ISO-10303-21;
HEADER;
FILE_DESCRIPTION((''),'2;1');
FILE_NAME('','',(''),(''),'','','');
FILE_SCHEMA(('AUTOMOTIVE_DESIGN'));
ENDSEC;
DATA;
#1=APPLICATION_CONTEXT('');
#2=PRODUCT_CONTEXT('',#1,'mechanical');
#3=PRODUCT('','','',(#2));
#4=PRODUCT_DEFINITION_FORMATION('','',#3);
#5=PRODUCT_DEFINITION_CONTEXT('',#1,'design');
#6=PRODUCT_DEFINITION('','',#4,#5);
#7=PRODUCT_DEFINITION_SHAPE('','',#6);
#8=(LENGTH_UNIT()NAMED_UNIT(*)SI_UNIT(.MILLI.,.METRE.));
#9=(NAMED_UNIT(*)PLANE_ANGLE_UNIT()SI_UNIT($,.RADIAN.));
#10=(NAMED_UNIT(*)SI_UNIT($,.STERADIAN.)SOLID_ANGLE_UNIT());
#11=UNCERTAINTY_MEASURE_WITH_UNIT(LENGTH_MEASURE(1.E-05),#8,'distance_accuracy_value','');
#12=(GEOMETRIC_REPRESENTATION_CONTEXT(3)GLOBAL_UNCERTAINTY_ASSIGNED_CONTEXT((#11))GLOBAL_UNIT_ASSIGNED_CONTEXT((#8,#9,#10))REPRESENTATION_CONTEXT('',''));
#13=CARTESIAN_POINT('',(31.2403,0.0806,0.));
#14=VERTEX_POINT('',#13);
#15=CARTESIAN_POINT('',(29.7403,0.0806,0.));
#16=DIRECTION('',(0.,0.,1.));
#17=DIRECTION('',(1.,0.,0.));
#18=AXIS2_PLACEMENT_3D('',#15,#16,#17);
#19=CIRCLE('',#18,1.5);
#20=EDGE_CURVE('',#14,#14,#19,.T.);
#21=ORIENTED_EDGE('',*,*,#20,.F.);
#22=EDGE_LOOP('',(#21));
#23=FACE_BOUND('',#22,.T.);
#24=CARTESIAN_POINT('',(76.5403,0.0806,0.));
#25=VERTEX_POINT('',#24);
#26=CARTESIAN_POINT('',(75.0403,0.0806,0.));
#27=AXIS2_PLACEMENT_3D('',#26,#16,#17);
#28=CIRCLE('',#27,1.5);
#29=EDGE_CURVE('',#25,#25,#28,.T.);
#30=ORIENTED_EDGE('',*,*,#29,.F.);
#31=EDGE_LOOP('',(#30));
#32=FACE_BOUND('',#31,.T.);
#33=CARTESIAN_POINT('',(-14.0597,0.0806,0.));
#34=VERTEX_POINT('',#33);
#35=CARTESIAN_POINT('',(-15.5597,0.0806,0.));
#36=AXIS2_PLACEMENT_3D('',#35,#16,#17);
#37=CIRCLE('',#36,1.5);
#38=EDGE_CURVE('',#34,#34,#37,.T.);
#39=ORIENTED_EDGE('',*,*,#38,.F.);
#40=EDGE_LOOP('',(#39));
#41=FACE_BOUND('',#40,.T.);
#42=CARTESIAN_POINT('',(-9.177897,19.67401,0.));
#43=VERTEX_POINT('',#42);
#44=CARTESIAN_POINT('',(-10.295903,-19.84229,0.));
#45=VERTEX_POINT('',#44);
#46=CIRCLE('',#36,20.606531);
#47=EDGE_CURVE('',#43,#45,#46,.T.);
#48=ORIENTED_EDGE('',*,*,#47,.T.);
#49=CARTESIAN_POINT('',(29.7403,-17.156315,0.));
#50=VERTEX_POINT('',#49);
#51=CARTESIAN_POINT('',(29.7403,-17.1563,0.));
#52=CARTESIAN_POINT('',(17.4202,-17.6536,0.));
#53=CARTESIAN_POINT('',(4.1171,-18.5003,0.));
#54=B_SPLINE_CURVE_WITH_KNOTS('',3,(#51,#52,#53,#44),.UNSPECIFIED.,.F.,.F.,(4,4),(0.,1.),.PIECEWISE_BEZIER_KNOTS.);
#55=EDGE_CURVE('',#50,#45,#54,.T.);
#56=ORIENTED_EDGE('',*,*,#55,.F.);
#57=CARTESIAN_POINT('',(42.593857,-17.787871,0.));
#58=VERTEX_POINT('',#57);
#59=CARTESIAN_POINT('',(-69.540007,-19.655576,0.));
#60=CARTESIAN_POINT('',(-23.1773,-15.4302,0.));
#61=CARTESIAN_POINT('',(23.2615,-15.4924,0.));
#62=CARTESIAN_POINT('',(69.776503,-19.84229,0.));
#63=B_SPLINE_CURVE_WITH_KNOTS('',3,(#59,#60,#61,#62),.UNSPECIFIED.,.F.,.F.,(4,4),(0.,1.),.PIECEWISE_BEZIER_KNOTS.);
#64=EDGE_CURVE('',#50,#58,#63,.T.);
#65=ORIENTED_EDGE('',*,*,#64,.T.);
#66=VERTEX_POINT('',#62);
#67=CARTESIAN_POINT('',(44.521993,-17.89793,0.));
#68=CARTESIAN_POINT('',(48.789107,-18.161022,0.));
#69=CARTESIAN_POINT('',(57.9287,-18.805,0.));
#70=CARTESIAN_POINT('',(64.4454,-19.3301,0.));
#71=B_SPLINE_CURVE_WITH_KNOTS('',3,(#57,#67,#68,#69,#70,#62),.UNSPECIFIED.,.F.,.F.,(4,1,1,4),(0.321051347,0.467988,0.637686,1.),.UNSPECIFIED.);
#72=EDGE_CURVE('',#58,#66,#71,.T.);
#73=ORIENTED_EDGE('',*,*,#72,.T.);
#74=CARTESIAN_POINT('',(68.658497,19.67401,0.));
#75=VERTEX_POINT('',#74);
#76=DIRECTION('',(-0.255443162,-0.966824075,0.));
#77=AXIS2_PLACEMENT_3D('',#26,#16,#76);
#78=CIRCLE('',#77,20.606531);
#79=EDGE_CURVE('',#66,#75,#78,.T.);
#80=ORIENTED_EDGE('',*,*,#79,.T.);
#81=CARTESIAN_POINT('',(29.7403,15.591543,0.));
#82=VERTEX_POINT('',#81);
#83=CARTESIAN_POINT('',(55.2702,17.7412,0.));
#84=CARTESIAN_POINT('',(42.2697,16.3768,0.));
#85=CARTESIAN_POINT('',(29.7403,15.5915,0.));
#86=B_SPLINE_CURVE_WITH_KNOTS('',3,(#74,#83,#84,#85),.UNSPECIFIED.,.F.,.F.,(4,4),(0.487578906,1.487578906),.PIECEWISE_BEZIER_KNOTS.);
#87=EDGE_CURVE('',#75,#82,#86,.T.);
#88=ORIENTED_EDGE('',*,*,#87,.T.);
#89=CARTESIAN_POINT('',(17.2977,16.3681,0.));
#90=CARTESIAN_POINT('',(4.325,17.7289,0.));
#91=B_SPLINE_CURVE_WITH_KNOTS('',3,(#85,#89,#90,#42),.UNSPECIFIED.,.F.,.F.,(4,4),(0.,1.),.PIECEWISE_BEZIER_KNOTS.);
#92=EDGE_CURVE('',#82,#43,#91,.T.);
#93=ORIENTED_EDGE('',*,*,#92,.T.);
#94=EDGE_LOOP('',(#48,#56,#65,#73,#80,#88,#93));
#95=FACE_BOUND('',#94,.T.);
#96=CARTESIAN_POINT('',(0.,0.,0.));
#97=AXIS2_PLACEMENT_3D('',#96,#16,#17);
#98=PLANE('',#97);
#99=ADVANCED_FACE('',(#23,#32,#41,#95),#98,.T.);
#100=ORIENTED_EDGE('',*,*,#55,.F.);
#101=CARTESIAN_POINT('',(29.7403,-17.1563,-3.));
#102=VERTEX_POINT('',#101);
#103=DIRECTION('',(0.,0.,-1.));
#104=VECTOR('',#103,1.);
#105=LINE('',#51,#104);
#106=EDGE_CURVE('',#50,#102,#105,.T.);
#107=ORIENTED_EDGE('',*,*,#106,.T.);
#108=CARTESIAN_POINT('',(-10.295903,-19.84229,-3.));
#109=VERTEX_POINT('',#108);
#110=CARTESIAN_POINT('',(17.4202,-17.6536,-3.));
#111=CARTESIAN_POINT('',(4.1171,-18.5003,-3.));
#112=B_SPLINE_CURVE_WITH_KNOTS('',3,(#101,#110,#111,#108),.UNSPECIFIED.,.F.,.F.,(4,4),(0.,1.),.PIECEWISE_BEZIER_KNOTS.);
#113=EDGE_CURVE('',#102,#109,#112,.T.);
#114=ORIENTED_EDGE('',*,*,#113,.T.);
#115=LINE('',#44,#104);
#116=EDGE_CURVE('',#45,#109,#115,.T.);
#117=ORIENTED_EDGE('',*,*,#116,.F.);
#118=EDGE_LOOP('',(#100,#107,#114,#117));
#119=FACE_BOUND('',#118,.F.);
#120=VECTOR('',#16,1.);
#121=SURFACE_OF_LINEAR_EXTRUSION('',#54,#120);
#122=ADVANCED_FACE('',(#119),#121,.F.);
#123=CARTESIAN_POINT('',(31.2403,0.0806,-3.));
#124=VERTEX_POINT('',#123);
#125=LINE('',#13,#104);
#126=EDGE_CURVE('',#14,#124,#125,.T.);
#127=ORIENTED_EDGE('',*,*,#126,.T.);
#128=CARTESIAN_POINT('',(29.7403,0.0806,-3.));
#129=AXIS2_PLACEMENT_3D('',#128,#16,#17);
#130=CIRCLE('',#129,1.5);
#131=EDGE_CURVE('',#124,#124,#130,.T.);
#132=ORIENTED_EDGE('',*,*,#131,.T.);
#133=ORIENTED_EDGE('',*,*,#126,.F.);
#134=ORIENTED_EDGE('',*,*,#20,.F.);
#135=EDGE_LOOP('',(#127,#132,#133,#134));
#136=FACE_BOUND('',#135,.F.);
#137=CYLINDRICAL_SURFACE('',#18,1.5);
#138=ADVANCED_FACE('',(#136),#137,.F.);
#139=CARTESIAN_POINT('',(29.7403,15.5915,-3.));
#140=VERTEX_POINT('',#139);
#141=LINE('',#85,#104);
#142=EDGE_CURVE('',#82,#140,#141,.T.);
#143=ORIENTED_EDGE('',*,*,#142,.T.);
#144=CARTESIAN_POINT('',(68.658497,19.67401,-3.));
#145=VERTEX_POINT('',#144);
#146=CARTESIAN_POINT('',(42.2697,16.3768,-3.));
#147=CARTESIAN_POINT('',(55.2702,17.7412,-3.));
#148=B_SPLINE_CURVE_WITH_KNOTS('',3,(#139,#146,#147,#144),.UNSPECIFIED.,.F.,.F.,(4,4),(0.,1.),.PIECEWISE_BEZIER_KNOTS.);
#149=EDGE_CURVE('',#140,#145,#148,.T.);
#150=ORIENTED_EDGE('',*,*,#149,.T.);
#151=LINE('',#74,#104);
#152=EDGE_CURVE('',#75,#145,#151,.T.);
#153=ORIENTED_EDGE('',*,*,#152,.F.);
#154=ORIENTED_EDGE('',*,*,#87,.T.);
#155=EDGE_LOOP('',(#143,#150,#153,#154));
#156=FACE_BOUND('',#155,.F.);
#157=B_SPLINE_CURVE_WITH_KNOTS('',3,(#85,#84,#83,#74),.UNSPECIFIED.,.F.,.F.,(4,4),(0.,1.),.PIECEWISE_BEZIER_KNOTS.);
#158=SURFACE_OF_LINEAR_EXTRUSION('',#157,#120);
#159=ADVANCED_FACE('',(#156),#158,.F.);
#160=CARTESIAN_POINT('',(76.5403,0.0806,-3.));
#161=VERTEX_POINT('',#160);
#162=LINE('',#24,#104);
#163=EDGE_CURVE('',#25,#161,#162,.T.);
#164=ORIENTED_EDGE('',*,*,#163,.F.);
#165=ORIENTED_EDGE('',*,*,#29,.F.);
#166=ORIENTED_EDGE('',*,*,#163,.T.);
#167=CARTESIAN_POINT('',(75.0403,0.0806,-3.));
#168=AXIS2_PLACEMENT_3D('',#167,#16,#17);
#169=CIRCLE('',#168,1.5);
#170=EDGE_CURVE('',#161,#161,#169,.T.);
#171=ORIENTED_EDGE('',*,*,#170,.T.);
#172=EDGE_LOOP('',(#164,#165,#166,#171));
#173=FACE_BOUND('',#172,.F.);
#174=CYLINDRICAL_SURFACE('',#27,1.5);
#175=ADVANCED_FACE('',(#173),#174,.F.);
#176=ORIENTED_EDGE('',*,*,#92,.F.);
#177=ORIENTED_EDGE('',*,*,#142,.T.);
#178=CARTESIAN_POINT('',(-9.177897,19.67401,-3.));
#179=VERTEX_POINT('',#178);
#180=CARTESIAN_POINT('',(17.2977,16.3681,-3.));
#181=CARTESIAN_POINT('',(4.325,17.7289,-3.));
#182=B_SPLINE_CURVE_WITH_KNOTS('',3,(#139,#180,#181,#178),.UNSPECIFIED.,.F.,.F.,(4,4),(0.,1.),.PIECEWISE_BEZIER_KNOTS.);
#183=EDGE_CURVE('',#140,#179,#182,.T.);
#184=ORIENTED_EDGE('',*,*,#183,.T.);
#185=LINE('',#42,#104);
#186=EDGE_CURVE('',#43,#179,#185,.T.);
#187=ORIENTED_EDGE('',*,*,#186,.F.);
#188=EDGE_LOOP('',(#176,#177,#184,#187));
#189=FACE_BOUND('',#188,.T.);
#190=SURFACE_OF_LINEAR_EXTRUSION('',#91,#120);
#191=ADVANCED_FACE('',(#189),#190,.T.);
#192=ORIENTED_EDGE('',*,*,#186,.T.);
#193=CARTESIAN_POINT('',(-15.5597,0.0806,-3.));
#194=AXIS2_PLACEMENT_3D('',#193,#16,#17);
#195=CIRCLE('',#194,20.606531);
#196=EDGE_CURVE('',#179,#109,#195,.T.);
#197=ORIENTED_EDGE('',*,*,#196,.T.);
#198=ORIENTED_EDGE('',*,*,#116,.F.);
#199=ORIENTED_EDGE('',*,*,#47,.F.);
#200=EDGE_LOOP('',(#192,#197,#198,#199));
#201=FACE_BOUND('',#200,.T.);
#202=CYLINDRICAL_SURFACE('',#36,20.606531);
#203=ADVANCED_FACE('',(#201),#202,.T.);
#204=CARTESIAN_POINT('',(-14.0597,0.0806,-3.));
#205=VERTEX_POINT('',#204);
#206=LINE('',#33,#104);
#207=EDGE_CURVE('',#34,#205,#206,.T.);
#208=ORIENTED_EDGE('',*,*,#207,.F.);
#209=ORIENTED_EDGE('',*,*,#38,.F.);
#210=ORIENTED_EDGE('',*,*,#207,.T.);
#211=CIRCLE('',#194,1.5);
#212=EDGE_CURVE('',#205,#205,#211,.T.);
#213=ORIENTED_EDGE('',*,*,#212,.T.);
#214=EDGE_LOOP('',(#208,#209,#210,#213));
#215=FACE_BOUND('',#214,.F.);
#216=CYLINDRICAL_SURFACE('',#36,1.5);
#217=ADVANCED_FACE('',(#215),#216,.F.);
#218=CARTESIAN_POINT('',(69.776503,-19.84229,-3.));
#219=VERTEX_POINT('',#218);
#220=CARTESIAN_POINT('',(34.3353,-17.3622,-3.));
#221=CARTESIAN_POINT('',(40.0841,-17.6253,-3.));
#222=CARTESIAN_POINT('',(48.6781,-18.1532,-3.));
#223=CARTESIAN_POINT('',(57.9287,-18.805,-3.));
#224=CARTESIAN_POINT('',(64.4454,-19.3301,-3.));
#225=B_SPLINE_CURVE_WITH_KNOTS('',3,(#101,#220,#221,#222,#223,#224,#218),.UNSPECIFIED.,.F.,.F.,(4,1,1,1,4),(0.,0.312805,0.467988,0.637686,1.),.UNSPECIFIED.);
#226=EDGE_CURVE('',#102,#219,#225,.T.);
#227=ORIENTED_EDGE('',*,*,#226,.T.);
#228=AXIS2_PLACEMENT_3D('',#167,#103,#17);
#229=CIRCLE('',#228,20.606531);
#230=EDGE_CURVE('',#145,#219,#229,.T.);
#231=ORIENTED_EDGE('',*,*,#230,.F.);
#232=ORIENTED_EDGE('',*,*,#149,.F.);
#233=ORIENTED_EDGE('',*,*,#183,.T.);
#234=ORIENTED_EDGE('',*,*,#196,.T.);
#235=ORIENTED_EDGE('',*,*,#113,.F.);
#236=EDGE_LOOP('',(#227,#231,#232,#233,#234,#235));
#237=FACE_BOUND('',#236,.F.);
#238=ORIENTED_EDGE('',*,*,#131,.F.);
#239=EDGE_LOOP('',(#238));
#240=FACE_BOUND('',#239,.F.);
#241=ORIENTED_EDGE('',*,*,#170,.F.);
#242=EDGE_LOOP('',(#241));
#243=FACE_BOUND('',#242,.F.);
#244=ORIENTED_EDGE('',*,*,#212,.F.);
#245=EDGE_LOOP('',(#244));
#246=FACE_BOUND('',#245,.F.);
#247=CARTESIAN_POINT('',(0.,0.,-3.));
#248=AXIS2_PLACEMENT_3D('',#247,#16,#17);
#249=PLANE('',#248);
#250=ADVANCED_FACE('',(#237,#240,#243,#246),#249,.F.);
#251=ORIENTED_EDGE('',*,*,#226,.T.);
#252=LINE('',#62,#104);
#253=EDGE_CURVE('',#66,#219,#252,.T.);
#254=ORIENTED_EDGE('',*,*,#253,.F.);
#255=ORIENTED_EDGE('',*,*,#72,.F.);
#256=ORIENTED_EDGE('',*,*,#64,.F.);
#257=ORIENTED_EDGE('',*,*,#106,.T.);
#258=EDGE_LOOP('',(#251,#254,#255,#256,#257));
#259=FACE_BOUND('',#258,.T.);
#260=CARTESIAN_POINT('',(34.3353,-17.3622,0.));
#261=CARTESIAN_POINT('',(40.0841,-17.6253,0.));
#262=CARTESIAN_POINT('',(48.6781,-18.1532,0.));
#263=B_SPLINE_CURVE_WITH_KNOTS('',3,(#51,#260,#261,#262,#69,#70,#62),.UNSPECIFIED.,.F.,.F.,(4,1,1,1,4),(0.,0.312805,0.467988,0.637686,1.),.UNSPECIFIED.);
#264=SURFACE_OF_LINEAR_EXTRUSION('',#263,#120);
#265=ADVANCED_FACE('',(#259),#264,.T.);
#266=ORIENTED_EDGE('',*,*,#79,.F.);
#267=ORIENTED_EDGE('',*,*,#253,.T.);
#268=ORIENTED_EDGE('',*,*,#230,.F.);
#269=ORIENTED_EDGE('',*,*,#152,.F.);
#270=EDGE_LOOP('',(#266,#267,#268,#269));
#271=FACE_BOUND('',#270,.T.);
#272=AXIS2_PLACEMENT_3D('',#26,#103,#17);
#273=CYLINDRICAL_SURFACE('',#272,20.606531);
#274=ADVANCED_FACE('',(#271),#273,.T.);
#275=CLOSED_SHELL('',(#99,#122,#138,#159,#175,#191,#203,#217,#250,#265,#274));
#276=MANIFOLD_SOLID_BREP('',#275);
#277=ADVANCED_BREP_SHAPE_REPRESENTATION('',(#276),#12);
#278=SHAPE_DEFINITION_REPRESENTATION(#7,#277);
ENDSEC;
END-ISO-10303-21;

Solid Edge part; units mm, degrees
sketch "Sketch1" plane through (0, 0, 0) normal (0, 0, 1) x (1, 0, 0)
  spline S0 degree 3 poles (-69.5242, 19.4932) (-23.3267, 12.9257) (22.6888, 12.9752) (68.6585, 19.674) knots 0 0 0 0 1 1 1 1
  spline S1 degree 3 poles (-69.54, -19.6556) (-23.1773, -15.4302) (23.2615, -15.4924) (69.7765, -19.8423) knots 0 0 0 0 1 1 1 1
  arc A0 (-69.54, -19.6556) -> (-69.5242, 19.4932) centre (-75.1666, -0.0789) cw
  arc A1 (68.6585, 19.674) -> (69.7765, -19.8423) centre (75.0403, 0.0806) cw
extrude "Protrusion1" add sketch "Sketch1" along normal blind 3
sketch "Sketch2" plane through (0.0555, 0.0806, 3) normal (0, 0, 1) x (1, 0, 0)
  circle A0 centre (83.5848, 0) radius 1
  circle A1 centre (55.6848, 0) radius 1
  line L0 (-58.5721, -6.5095) -> (-58.5721, 6.1905)
  line L1 (-58.5721, 6.1905) -> (-81.1721, 6.1905)
  line L2 (-81.1721, 6.1905) -> (-81.1721, -6.5095)
  line L3 (-81.1721, -6.5095) -> (-58.5721, -6.5095)
  circle A2 centre (-83.8221, -0.1595) radius 1
  circle A3 centre (-55.9221, -0.1595) radius 1
  line L4 (58.3348, 6.35) -> (58.3348, -6.35)
  line L5 (58.3348, -6.35) -> (80.9348, -6.35)
  line L6 (80.9348, -6.35) -> (80.9348, 6.35)
  line L7 (80.9348, 6.35) -> (58.3348, 6.35)
  dimension "D1" = 22.6
  dimension "D2" = 22.6
  dimension "D3" = 12.7
extrude "ExtrudedCutout_1" cut sketch "Sketch2" against normal blind 484.752
sketch "Sketch3" plane through (0.0555, 0.0806, 3) normal (0, 0, 1) x (1, 0, 0)
  line L0 (29.6848, 27.4896) -> (-99.1539, 27.4896)
  line L1 (-99.1539, 27.4896) -> (-99.1539, -25.8213)
  line L2 (-99.1539, -25.8213) -> (29.6848, -25.8213)
  line L3 (29.6848, -25.8213) -> (29.6848, 27.4896)
extrude "ExtrudedCutout_2" cut sketch "Sketch3" against normal blind 169.5138
sketch "Sketch4" plane through (0, 0, 0) normal (0, 0, 1) x (1, 0, 0)
  line L0 (29.7403, -17.1563) -> (29.7403, 15.5915)
  spline S0 degree 3 poles (29.7403, 15.5915) (42.2697, 16.3768) (55.2702, 17.7412) (68.6585, 19.674) knots 0 0 0 0 1 1 1 1
  spline S1 degree 3 poles (29.7403, -17.1563) (34.3353, -17.3622) (40.0841, -17.6253) (48.6781, -18.1532) (57.9287, -18.805) (64.4454, -19.3301) (69.7765, -19.8423) knots 0 0 0 0 0.312805 0.467988 0.637686 1 1 1 1
  arc A0 (68.6585, 19.674) -> (69.7765, -19.8423) centre (75.0403, 0.0806) cw
  line L1 (58.3903, -6.2694) -> (58.3903, 6.4306)
  line L2 (58.3903, 6.4306) -> (80.9903, 6.4306)
  line L3 (80.9903, 6.4306) -> (80.9903, -6.2694)
  line L4 (80.9903, -6.2694) -> (58.3903, -6.2694)
  circle A1 centre (55.7403, 0.0806) radius 1
  circle A2 centre (83.6403, 0.0806) radius 1
  line L5 (29.7403, -17.1563) -> (29.7403, 15.5915)
  spline S2 degree 3 poles (29.7403, 15.5915) (17.2109, 16.3768) (4.2104, 17.7412) (-9.1779, 19.674) knots 0 0 0 0 1 1 1 1
  arc A3 (-9.1779, 19.674) -> (-10.2959, -19.8423) centre (-15.5597, 0.0806) ccw
  spline S3 degree 3 poles (29.7403, -17.1563) (25.1453, -17.3622) (19.3965, -17.6253) (10.8024, -18.1532) (1.5519, -18.805) (-4.9648, -19.3301) (-10.2959, -19.8423) knots 0 0 0 0 0.312805 0.467988 0.637686 1 1 1 1
  line L6 (1.0903, -6.2694) -> (1.0903, 6.4306)
  line L7 (1.0903, 6.4306) -> (-21.5097, 6.4306)
  line L8 (-21.5097, 6.4306) -> (-21.5097, -6.2694)
  line L9 (-21.5097, -6.2694) -> (1.0903, -6.2694)
  circle A4 centre (3.7403, 0.0806) radius 1
  circle A5 centre (-24.1597, 0.0806) radius 1
extrude "ExtrudedProtrusion_2" add sketch "Sketch4" against normal blind 3
sketch "Sketch5" plane through (-3.213, 0.0806, 0) normal (0, 0, 1) x (0, 1, 0)
  line L0 (25.6992, -32.9533) -> (-24.0131, -32.9533)
  line L1 (-24.0131, -32.9533) -> (-24.0131, 35.3247)
  line L2 (-24.0131, 35.3247) -> (25.6992, 35.3247)
  line L3 (25.6992, 35.3247) -> (25.6992, -32.9533)
extrude "ExtrudedCutout_3" cut sketch "Sketch5" against normal blind 310.7547
sketch "Sketch6" plane through (69.6903, 6.4306, 0) normal (0, -1, 0) x (1, 0, 0)
  line L0 (-39.95, 3) -> (25.9565, 3)
  line L1 (25.9565, 3) -> (25.9565, 0)
  line L2 (25.9565, 0) -> (-39.95, 0)
  line L3 (-39.95, 0) -> (-39.95, 3)
extrude "ExtrudedCutout_4" cut sketch "Sketch6" against normal blind 369.6121
sketch "Sketch7" plane through (69.6903, -6.2694, 0) normal (0, 1, 0) x (1, 0, 0)
  line L0 (-39.95, -0.4111) -> (-39.95, -3)
  line L1 (-39.95, -3) -> (25.7218, -3)
  line L2 (25.7218, -3) -> (25.9565, 0)
  line L3 (25.9565, 0) -> (-39.95, -0.4111)
extrude "ExtrudedCutout_5" cut sketch "Sketch7" against normal blind 176.465
sketch "Sketch8" plane through (29.7403, -0.7635, 0) normal (-1, 0, 0) x (0, -1, 0)
  line L0 (20.933, 0) -> (-7.194, 0)
  line L1 (-7.194, 0) -> (-7.194, 4.1468)
  line L2 (-7.194, 4.1468) -> (20.933, 4.1468)
  line L3 (20.933, 4.1468) -> (20.933, 0)
extrude "ExtrudedCutout_6" cut sketch "Sketch8" against normal blind 228.3963
sketch "Sketch9" plane through (0, 0, 0) normal (0, 0, 1) x (1, 0, 0)
  line L0 (-21.5097, -6.2694) -> (-21.5097, 6.4306)
  line L1 (-21.5097, 6.4306) -> (1.0903, 6.4306)
  line L2 (1.0903, -6.2694) -> (1.0903, 6.4306)
  line L3 (1.0903, -6.2694) -> (-21.5097, -6.2694)
  circle A0 centre (3.7403, 0.0806) radius 1
  circle A1 centre (-24.1597, 0.0806) radius 1
  spline S0 degree 3 poles (29.7403, 15.5915) (17.2977, 16.3681) (4.325, 17.7289) (-9.1779, 19.674) knots 0 0 0 0 1 1 1 1
  arc A2 (-9.1779, 19.674) -> (-10.2959, -19.8423) centre (-15.5597, 0.0806) ccw
  spline S1 degree 3 poles (29.7403, -17.1563) (17.4202, -17.6536) (4.1171, -18.5003) (-10.2959, -19.8423) knots 0 0 0 0 1 1 1 1
  line L4 (29.7403, -17.1563) -> (29.7403, 15.5915)
extrude "ExtrudedProtrusion_3" add sketch "Sketch9" against normal blind 3
sketch "Sketch10" plane through (29.7403, 0.0806, 0) normal (0, 0, 1) x (1, 0, 0)
  line L0 (-24.0106, -8.9531) -> (-56.723, -8.9531)
  line L1 (-56.723, -8.9531) -> (-56.723, 8.934)
  line L2 (-56.723, 8.934) -> (-24.0106, 8.934)
  line L3 (-24.0106, 8.934) -> (-24.0106, -8.9531)
  line L4 (23.0437, -9.1142) -> (23.0437, 9.5786)
  line L5 (23.0437, 9.5786) -> (56.723, 9.5786)
  line L6 (56.723, 9.5786) -> (56.723, -9.1142)
  line L7 (56.723, -9.1142) -> (23.0437, -9.1142)
extrude "ExtrudedProtrusion_4" add sketch "Sketch10" against normal blind 3
sketch "Sketch11" plane through (29.7403, 0.0806, 0) normal (0, 0, 1) x (1, 0, 0)
  circle A0 centre (-45.3, 0) radius 1.5
  circle A1 centre (45.3, 0) radius 1.5
  circle A2 centre (0, 0) radius 1.5
extrude "Cutout1" cut sketch "Sketch11" against normal blind 593.6896
